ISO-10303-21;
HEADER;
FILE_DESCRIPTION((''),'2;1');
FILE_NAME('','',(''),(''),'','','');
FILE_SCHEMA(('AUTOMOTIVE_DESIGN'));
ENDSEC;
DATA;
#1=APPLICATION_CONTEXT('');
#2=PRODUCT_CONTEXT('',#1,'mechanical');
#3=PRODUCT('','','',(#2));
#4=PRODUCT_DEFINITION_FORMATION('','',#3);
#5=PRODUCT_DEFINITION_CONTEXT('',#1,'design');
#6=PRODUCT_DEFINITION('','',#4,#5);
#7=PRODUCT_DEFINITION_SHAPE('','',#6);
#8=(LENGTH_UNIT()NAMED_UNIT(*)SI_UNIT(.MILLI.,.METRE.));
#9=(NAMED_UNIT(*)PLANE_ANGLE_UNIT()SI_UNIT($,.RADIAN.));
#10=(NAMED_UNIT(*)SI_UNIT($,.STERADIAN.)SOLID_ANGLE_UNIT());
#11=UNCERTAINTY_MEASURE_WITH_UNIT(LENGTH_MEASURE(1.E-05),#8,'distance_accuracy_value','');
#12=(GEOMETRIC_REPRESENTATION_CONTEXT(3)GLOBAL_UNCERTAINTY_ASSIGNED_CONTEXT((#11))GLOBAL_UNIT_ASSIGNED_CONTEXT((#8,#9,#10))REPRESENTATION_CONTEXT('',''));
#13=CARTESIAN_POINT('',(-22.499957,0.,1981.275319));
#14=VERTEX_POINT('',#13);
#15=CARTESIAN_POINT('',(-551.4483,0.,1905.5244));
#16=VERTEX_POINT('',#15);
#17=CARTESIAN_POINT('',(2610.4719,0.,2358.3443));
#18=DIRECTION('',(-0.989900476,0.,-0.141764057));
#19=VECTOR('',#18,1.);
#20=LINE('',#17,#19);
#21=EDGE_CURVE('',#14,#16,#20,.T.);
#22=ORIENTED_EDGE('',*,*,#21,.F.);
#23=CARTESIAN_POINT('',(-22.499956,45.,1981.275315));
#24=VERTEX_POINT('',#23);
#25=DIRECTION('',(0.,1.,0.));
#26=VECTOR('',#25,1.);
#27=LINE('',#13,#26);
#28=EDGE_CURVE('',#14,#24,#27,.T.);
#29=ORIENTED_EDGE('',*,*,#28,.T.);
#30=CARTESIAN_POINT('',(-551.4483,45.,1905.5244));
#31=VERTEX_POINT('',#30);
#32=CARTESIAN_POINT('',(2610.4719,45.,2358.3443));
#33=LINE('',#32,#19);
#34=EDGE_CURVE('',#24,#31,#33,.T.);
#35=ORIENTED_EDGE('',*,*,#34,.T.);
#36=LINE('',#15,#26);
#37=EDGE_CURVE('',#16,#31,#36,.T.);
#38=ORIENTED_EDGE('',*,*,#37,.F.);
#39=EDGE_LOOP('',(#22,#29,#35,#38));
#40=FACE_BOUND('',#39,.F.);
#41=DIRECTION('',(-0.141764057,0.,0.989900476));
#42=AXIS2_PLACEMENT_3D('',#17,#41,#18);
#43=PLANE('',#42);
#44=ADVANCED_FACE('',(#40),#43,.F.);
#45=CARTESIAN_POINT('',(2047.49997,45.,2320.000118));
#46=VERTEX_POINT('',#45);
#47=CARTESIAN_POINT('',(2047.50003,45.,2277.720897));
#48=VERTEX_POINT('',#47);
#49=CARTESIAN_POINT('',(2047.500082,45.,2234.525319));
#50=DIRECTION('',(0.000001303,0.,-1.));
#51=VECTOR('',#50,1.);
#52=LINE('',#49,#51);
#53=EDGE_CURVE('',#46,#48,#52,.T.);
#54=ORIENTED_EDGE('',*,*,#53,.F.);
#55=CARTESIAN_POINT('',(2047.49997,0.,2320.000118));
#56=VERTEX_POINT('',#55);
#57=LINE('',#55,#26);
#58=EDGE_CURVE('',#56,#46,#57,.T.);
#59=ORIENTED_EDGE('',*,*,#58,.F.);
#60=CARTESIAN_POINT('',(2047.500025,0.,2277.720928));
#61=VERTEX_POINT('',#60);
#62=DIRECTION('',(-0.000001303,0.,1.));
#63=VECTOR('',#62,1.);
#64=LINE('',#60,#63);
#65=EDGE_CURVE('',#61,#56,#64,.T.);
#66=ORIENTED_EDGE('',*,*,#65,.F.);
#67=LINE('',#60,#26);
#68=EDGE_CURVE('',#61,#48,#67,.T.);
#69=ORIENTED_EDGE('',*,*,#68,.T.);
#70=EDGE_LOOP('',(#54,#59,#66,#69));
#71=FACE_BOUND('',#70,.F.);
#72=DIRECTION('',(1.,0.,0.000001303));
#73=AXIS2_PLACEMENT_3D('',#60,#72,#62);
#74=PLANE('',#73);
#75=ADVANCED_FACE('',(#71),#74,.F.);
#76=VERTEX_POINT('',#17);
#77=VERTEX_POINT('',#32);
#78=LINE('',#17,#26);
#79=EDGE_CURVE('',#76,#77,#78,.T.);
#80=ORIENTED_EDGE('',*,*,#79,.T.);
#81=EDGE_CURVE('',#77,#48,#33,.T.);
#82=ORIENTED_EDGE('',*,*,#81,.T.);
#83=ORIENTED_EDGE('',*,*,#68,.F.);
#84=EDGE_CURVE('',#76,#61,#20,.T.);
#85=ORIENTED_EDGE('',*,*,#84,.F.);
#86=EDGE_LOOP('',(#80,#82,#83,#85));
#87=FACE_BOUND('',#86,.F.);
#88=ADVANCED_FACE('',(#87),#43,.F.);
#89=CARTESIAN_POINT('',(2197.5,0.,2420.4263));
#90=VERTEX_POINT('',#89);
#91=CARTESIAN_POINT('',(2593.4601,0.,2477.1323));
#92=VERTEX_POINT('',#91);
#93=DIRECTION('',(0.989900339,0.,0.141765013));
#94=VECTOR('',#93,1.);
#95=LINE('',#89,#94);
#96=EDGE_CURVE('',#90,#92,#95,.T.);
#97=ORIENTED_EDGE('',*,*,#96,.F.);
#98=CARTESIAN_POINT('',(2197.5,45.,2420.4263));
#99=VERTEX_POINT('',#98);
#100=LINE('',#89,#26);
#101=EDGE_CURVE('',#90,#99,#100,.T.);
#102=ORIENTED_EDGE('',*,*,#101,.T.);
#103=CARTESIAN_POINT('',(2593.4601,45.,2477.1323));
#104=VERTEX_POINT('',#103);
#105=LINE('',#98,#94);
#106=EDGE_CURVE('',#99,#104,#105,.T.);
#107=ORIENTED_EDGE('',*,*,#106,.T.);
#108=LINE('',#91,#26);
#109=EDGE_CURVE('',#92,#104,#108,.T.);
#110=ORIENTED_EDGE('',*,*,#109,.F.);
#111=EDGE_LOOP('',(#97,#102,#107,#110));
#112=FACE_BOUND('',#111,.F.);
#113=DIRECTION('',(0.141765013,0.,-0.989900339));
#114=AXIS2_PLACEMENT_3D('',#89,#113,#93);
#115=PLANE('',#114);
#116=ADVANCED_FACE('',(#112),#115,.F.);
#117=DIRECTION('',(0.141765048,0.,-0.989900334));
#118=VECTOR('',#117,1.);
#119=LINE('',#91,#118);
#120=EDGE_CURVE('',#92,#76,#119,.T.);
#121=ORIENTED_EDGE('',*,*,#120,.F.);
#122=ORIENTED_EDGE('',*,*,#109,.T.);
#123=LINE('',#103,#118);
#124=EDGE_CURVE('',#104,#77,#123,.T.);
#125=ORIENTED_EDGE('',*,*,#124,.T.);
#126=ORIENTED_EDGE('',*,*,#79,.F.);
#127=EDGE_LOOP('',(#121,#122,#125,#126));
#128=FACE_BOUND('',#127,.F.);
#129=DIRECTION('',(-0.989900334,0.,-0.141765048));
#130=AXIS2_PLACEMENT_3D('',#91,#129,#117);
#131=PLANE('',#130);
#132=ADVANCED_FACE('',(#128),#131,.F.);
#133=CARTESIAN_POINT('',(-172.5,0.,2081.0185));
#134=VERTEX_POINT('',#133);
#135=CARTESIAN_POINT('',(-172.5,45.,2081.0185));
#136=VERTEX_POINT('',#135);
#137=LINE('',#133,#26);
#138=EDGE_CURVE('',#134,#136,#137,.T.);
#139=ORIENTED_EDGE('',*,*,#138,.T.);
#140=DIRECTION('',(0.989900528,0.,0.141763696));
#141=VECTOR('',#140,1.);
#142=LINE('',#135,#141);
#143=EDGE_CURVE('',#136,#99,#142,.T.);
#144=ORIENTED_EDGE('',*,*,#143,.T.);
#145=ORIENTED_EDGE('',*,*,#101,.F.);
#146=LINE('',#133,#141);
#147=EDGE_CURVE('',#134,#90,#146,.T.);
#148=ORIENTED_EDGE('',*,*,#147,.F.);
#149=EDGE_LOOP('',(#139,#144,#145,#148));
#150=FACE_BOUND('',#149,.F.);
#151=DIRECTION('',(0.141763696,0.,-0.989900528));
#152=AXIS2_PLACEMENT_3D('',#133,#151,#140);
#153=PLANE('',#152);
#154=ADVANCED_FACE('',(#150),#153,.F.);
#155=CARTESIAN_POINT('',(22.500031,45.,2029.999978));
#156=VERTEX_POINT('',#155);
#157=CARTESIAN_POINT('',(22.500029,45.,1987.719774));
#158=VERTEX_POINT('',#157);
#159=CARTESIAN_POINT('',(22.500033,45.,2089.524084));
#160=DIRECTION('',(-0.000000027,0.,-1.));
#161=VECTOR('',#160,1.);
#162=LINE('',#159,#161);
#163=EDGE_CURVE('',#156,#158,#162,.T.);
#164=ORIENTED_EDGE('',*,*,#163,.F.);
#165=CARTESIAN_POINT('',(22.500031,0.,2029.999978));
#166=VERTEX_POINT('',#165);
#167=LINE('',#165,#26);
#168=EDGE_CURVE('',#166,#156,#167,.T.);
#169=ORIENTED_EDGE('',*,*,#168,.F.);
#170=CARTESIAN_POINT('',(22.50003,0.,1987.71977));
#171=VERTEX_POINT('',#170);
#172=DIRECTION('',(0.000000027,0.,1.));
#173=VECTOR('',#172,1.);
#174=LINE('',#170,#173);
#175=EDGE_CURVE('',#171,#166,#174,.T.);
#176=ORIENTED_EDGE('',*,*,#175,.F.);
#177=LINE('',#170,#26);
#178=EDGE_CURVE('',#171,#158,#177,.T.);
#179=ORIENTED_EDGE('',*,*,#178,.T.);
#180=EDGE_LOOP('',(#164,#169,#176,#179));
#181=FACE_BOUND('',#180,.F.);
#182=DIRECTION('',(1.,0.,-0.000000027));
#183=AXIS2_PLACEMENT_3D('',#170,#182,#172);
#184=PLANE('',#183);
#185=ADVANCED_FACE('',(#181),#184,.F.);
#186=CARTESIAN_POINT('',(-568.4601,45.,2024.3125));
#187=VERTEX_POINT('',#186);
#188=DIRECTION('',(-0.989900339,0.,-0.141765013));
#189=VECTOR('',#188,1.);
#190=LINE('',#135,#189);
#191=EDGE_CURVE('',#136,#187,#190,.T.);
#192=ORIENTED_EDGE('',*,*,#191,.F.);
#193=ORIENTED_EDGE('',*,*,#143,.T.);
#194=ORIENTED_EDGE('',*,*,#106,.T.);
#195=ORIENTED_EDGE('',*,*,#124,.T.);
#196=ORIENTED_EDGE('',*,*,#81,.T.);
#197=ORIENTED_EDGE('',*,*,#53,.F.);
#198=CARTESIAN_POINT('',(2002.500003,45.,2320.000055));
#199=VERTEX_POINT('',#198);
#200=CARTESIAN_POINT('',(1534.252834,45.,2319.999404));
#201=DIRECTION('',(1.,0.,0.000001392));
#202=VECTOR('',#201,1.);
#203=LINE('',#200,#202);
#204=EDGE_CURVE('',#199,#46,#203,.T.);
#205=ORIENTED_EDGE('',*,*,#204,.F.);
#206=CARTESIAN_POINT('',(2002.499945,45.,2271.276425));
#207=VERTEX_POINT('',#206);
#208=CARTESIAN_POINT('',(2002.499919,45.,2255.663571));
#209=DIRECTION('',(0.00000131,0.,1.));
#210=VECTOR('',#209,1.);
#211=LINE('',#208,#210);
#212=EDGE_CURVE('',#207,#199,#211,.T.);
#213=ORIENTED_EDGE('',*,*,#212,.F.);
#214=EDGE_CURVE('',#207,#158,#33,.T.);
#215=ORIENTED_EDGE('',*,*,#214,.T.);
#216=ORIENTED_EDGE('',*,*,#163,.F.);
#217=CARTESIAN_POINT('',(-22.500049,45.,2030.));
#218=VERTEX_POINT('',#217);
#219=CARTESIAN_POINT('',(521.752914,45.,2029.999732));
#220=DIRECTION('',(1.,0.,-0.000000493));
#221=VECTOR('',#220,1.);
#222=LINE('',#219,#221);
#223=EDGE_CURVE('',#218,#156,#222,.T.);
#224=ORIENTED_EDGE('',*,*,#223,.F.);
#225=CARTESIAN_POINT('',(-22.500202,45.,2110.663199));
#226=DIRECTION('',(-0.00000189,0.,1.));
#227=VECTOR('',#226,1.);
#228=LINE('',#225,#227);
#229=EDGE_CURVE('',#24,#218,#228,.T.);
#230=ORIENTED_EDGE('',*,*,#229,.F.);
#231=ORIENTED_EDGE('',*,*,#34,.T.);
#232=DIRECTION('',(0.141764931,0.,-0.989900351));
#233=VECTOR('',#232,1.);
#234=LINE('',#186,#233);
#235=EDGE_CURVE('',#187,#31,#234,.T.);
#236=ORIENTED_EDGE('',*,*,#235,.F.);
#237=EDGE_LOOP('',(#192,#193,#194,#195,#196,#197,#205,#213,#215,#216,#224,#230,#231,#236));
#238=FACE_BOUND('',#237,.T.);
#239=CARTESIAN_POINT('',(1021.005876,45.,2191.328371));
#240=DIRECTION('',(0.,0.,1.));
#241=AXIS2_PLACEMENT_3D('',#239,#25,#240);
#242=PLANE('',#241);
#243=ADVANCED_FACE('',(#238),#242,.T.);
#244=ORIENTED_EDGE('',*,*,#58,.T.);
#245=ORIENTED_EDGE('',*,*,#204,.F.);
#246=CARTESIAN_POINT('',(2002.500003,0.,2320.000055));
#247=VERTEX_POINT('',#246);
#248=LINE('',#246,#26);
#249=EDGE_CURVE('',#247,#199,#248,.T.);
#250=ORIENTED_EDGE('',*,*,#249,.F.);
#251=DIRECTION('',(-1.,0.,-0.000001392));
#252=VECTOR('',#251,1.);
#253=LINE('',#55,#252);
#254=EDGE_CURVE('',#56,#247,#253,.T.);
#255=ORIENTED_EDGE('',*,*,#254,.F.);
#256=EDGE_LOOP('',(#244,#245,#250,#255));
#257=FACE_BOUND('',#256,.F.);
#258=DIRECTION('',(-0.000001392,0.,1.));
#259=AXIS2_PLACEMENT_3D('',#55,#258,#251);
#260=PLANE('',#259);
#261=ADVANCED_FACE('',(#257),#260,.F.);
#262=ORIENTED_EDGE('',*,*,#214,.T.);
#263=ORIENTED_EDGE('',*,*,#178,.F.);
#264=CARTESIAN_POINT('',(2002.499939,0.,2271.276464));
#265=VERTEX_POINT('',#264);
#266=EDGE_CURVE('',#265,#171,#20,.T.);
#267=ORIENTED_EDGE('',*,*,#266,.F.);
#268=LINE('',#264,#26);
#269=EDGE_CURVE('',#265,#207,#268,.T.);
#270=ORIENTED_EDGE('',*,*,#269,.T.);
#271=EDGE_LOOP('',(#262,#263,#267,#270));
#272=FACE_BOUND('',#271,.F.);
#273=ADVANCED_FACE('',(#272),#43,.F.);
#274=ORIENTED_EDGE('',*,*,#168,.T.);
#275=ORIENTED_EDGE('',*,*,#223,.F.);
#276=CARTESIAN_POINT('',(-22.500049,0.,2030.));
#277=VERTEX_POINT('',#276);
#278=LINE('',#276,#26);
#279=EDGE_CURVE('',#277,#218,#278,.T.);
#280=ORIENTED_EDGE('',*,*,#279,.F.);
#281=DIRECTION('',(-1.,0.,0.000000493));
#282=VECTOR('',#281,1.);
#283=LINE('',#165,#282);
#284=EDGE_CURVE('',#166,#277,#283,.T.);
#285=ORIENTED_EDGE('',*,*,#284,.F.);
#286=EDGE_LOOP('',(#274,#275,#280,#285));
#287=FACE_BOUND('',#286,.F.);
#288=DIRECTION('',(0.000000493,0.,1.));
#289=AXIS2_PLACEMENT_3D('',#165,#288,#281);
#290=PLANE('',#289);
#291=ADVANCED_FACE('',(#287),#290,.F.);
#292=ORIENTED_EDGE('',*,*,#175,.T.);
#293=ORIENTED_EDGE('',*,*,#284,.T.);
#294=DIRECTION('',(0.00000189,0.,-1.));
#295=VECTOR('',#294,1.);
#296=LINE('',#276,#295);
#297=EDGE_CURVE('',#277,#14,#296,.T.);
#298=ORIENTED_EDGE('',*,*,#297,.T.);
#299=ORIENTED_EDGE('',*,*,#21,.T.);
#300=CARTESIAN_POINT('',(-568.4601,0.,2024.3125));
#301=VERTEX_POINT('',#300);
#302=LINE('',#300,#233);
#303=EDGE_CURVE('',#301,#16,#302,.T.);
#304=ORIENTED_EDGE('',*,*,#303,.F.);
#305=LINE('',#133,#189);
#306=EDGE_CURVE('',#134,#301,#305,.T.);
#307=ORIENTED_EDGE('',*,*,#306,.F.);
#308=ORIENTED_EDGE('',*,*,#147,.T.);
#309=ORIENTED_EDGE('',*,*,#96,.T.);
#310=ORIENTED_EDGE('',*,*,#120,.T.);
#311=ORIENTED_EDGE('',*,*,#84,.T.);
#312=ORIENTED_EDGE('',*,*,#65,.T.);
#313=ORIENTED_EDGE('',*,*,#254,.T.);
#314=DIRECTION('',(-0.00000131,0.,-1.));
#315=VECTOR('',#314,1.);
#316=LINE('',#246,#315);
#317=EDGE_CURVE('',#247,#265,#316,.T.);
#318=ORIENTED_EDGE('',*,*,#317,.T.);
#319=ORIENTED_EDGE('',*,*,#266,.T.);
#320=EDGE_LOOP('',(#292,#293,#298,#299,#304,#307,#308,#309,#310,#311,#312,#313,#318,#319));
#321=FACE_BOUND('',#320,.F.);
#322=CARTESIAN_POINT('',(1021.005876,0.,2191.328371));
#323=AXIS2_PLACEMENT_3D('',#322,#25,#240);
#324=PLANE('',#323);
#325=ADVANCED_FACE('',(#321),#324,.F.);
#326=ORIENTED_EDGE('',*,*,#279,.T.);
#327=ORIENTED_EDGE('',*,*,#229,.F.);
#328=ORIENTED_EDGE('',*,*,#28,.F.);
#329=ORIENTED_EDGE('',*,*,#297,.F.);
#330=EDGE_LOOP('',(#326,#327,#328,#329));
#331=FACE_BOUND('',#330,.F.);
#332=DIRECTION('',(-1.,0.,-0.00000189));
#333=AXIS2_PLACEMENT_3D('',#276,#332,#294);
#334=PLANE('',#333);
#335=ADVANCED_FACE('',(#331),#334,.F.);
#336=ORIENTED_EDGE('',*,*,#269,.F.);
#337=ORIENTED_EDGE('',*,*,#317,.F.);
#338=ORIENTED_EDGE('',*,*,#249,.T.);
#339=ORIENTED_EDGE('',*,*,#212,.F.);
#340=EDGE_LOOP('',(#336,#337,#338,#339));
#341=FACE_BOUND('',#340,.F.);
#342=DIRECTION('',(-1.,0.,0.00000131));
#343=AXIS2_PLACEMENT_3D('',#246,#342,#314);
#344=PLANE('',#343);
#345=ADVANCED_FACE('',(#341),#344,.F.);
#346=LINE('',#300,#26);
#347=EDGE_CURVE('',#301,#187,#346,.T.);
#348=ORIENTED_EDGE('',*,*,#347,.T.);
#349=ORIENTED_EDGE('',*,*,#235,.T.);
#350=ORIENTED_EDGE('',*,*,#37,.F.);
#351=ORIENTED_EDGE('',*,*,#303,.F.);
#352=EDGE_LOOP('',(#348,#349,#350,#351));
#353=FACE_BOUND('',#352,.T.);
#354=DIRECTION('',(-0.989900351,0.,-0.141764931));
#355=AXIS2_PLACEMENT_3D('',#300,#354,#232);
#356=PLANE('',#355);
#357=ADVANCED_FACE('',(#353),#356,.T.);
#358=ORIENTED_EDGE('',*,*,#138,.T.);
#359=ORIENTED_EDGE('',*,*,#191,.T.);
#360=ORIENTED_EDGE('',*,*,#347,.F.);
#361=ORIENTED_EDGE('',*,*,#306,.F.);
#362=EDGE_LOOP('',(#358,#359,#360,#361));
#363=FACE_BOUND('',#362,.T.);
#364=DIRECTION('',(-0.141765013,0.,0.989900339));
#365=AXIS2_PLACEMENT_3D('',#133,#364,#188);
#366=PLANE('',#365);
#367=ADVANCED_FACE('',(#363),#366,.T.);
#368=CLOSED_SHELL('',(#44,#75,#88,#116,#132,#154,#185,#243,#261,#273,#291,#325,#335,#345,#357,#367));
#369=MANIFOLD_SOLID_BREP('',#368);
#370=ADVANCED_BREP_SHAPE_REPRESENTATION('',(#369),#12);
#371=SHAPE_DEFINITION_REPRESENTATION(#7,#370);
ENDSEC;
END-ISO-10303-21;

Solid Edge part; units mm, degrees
sketch "Sketch1" plane through (0, 0, 0) normal (0, -1, 0) x (1, 0, 0)
  line L0 (-172.5, 2081.0185) -> (2197.5, 2420.4263)
  line L1 (2197.5, 2420.4263) -> (2593.4601, 2477.1323)
  line L2 (2593.4601, 2477.1323) -> (2610.4719, 2358.3443)
  line L3 (2610.4719, 2358.3443) -> (-551.4483, 1905.5244)
  line L4 (-568.4601, 2024.3125) -> (-551.4483, 1905.5244)
  line L5 (-172.5, 2081.0185) -> (-568.4601, 2024.3125)
extrude "Protrusion1" add sketch "Sketch1" against normal blind 45
sketch "Sketch2" plane through (1021.0059, 0, 2191.3284) normal (0, -1, 0) x (0.9899005, 0, 0.1417637)
  line L0 (1034.368, -18.1474) -> (989.8225, -11.7681)
  line L1 (989.8225, -11.7681) -> (982.9152, -59.9996)
  line L2 (982.9152, -59.9996) -> (1028.3744, -59.9996)
  line L3 (1028.3744, -59.9996) -> (1034.368, -18.1474)
  line L4 (-1011.292, -18.1472) -> (-1055.8376, -11.7678)
  line L5 (-1055.8376, -11.7678) -> (-1062.7449, -60.0004)
  line L6 (-1062.7449, -60.0004) -> (-1017.2858, -60.0004)
  line L7 (-1017.2858, -60.0004) -> (-1011.292, -18.1472)
extrude "ExtrudedCutout_1" cut sketch "Sketch2" against normal blind 99.8305
